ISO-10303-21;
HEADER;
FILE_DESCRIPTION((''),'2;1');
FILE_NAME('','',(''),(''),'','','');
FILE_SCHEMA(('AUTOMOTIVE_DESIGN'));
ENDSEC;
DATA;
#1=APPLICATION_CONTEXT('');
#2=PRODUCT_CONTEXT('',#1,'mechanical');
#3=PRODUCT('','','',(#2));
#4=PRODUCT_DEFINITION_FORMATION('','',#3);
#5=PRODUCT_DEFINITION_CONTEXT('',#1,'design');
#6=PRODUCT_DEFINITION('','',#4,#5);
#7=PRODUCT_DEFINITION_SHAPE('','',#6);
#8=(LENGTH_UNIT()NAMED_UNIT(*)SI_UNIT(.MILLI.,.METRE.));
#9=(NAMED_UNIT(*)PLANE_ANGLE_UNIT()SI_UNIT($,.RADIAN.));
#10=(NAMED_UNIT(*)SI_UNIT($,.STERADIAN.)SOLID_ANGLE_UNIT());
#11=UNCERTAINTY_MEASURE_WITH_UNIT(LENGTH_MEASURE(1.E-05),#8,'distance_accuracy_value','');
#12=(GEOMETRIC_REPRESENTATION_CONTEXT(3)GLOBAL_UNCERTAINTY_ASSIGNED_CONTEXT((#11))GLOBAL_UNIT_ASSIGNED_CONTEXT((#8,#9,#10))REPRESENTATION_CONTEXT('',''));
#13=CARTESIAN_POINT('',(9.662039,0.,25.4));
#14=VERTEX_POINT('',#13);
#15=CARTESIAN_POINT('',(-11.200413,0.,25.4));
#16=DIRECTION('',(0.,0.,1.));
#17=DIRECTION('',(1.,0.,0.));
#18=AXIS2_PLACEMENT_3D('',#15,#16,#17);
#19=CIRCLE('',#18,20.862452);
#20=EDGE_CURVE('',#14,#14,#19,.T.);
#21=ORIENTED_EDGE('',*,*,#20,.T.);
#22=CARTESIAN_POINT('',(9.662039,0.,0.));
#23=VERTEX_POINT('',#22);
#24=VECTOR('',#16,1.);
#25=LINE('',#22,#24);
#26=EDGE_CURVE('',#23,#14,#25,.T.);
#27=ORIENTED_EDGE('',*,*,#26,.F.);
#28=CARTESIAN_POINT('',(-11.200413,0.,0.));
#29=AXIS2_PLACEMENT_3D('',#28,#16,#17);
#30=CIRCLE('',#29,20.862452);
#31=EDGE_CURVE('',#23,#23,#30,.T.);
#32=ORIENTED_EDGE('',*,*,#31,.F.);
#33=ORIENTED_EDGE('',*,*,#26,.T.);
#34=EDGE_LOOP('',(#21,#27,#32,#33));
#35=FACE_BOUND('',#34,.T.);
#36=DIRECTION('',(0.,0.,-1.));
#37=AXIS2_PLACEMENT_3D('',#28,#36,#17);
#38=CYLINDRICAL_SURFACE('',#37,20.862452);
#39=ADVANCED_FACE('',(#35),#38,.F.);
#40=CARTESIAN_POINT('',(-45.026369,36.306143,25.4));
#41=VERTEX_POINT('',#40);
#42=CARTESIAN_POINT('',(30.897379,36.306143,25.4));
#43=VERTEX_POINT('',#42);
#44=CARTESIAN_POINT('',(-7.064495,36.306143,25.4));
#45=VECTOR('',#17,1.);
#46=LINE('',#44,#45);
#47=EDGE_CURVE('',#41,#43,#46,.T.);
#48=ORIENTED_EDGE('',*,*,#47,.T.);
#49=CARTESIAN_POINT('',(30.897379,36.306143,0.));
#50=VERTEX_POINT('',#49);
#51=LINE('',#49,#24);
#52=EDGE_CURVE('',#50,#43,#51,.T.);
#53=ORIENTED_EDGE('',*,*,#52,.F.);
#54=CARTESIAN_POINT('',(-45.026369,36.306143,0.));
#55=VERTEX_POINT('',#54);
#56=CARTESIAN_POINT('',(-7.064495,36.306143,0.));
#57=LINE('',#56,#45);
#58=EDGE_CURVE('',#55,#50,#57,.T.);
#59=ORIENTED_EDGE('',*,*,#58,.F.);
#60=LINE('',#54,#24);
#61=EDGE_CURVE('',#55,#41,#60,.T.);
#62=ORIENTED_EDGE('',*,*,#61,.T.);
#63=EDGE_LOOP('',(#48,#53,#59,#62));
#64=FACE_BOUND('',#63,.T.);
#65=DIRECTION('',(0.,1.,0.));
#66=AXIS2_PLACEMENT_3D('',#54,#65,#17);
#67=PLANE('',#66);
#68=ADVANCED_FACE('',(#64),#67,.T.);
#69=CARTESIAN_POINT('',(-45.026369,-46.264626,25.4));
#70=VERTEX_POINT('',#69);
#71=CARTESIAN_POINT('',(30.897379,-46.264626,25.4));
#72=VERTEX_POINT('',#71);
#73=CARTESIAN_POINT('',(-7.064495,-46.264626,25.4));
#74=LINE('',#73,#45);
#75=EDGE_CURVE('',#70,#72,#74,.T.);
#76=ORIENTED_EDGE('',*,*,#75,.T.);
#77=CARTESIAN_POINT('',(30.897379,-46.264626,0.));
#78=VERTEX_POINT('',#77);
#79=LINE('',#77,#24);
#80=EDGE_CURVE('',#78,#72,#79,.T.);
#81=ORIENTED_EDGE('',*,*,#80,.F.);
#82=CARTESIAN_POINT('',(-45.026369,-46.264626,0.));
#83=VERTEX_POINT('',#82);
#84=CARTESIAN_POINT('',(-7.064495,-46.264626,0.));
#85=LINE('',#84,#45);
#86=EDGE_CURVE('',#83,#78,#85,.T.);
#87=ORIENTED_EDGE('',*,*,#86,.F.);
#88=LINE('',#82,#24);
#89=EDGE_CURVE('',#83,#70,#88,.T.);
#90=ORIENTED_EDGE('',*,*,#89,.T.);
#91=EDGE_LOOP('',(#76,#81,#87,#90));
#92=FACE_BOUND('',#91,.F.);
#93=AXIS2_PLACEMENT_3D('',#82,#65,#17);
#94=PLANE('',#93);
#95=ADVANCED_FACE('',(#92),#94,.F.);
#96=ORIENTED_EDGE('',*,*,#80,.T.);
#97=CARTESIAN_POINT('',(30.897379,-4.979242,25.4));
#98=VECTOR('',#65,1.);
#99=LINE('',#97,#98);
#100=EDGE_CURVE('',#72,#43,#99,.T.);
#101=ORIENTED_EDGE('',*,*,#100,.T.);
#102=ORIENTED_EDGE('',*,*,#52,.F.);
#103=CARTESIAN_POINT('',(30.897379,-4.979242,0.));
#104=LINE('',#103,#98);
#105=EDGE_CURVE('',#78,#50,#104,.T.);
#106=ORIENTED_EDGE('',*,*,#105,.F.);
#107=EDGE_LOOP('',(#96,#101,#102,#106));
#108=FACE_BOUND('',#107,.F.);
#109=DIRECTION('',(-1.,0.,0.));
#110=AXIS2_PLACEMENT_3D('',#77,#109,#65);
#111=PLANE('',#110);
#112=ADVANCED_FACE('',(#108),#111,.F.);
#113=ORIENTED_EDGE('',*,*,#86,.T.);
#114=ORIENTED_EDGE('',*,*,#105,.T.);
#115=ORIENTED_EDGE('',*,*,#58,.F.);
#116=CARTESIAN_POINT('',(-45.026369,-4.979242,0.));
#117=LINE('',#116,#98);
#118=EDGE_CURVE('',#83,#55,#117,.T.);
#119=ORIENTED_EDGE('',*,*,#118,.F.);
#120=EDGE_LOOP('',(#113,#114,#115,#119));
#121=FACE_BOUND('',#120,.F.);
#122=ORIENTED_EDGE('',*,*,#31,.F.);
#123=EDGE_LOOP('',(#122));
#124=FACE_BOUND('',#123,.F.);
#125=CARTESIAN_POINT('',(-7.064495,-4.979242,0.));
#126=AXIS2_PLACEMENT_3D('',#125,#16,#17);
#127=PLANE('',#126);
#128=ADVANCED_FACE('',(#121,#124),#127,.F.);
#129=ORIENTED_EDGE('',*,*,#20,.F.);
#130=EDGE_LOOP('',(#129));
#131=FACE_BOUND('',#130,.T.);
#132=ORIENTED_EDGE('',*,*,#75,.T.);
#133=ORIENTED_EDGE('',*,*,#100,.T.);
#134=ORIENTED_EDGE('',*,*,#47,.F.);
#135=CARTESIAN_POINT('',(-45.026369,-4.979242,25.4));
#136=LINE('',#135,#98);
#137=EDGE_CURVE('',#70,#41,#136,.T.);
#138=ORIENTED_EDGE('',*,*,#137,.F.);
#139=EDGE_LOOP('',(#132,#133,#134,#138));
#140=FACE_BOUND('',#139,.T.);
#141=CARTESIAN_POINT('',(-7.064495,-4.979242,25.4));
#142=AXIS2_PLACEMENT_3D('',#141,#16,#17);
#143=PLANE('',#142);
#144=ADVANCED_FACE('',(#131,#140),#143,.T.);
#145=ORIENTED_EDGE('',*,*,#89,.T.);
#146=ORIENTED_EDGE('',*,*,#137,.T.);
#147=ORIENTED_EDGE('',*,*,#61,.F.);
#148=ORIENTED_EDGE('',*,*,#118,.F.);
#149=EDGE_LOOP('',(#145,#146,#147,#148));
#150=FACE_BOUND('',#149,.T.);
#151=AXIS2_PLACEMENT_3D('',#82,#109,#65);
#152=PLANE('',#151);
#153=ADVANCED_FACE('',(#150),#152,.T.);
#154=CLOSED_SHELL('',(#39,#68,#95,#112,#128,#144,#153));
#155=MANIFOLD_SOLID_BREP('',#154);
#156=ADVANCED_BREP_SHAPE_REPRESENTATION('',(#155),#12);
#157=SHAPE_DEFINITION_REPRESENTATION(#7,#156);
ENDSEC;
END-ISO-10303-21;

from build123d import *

# Parameters (mm, degrees)
F1_W     = 75.9237483144
F1_H     = 82.5707688928
F1_R     = 20.8624523747
F2_DEPTH = 25.4


# Not quite as in the source:
# - the program builds the solid bodies; features that only make, move or delete a surface that nothing else refers to are left out


with BuildPart() as f2:
    # F1 (on face) → F2 (new body)
    with BuildSketch(Plane.XY):
        with Locations((-7.0644952357, -4.9792416394)):
            Rectangle(F1_W, F1_H)
        with Locations((-11.2004131079, 0)):
            Circle(F1_R, mode=Mode.SUBTRACT)
    extrude(amount=F2_DEPTH)


solid = f2.part
